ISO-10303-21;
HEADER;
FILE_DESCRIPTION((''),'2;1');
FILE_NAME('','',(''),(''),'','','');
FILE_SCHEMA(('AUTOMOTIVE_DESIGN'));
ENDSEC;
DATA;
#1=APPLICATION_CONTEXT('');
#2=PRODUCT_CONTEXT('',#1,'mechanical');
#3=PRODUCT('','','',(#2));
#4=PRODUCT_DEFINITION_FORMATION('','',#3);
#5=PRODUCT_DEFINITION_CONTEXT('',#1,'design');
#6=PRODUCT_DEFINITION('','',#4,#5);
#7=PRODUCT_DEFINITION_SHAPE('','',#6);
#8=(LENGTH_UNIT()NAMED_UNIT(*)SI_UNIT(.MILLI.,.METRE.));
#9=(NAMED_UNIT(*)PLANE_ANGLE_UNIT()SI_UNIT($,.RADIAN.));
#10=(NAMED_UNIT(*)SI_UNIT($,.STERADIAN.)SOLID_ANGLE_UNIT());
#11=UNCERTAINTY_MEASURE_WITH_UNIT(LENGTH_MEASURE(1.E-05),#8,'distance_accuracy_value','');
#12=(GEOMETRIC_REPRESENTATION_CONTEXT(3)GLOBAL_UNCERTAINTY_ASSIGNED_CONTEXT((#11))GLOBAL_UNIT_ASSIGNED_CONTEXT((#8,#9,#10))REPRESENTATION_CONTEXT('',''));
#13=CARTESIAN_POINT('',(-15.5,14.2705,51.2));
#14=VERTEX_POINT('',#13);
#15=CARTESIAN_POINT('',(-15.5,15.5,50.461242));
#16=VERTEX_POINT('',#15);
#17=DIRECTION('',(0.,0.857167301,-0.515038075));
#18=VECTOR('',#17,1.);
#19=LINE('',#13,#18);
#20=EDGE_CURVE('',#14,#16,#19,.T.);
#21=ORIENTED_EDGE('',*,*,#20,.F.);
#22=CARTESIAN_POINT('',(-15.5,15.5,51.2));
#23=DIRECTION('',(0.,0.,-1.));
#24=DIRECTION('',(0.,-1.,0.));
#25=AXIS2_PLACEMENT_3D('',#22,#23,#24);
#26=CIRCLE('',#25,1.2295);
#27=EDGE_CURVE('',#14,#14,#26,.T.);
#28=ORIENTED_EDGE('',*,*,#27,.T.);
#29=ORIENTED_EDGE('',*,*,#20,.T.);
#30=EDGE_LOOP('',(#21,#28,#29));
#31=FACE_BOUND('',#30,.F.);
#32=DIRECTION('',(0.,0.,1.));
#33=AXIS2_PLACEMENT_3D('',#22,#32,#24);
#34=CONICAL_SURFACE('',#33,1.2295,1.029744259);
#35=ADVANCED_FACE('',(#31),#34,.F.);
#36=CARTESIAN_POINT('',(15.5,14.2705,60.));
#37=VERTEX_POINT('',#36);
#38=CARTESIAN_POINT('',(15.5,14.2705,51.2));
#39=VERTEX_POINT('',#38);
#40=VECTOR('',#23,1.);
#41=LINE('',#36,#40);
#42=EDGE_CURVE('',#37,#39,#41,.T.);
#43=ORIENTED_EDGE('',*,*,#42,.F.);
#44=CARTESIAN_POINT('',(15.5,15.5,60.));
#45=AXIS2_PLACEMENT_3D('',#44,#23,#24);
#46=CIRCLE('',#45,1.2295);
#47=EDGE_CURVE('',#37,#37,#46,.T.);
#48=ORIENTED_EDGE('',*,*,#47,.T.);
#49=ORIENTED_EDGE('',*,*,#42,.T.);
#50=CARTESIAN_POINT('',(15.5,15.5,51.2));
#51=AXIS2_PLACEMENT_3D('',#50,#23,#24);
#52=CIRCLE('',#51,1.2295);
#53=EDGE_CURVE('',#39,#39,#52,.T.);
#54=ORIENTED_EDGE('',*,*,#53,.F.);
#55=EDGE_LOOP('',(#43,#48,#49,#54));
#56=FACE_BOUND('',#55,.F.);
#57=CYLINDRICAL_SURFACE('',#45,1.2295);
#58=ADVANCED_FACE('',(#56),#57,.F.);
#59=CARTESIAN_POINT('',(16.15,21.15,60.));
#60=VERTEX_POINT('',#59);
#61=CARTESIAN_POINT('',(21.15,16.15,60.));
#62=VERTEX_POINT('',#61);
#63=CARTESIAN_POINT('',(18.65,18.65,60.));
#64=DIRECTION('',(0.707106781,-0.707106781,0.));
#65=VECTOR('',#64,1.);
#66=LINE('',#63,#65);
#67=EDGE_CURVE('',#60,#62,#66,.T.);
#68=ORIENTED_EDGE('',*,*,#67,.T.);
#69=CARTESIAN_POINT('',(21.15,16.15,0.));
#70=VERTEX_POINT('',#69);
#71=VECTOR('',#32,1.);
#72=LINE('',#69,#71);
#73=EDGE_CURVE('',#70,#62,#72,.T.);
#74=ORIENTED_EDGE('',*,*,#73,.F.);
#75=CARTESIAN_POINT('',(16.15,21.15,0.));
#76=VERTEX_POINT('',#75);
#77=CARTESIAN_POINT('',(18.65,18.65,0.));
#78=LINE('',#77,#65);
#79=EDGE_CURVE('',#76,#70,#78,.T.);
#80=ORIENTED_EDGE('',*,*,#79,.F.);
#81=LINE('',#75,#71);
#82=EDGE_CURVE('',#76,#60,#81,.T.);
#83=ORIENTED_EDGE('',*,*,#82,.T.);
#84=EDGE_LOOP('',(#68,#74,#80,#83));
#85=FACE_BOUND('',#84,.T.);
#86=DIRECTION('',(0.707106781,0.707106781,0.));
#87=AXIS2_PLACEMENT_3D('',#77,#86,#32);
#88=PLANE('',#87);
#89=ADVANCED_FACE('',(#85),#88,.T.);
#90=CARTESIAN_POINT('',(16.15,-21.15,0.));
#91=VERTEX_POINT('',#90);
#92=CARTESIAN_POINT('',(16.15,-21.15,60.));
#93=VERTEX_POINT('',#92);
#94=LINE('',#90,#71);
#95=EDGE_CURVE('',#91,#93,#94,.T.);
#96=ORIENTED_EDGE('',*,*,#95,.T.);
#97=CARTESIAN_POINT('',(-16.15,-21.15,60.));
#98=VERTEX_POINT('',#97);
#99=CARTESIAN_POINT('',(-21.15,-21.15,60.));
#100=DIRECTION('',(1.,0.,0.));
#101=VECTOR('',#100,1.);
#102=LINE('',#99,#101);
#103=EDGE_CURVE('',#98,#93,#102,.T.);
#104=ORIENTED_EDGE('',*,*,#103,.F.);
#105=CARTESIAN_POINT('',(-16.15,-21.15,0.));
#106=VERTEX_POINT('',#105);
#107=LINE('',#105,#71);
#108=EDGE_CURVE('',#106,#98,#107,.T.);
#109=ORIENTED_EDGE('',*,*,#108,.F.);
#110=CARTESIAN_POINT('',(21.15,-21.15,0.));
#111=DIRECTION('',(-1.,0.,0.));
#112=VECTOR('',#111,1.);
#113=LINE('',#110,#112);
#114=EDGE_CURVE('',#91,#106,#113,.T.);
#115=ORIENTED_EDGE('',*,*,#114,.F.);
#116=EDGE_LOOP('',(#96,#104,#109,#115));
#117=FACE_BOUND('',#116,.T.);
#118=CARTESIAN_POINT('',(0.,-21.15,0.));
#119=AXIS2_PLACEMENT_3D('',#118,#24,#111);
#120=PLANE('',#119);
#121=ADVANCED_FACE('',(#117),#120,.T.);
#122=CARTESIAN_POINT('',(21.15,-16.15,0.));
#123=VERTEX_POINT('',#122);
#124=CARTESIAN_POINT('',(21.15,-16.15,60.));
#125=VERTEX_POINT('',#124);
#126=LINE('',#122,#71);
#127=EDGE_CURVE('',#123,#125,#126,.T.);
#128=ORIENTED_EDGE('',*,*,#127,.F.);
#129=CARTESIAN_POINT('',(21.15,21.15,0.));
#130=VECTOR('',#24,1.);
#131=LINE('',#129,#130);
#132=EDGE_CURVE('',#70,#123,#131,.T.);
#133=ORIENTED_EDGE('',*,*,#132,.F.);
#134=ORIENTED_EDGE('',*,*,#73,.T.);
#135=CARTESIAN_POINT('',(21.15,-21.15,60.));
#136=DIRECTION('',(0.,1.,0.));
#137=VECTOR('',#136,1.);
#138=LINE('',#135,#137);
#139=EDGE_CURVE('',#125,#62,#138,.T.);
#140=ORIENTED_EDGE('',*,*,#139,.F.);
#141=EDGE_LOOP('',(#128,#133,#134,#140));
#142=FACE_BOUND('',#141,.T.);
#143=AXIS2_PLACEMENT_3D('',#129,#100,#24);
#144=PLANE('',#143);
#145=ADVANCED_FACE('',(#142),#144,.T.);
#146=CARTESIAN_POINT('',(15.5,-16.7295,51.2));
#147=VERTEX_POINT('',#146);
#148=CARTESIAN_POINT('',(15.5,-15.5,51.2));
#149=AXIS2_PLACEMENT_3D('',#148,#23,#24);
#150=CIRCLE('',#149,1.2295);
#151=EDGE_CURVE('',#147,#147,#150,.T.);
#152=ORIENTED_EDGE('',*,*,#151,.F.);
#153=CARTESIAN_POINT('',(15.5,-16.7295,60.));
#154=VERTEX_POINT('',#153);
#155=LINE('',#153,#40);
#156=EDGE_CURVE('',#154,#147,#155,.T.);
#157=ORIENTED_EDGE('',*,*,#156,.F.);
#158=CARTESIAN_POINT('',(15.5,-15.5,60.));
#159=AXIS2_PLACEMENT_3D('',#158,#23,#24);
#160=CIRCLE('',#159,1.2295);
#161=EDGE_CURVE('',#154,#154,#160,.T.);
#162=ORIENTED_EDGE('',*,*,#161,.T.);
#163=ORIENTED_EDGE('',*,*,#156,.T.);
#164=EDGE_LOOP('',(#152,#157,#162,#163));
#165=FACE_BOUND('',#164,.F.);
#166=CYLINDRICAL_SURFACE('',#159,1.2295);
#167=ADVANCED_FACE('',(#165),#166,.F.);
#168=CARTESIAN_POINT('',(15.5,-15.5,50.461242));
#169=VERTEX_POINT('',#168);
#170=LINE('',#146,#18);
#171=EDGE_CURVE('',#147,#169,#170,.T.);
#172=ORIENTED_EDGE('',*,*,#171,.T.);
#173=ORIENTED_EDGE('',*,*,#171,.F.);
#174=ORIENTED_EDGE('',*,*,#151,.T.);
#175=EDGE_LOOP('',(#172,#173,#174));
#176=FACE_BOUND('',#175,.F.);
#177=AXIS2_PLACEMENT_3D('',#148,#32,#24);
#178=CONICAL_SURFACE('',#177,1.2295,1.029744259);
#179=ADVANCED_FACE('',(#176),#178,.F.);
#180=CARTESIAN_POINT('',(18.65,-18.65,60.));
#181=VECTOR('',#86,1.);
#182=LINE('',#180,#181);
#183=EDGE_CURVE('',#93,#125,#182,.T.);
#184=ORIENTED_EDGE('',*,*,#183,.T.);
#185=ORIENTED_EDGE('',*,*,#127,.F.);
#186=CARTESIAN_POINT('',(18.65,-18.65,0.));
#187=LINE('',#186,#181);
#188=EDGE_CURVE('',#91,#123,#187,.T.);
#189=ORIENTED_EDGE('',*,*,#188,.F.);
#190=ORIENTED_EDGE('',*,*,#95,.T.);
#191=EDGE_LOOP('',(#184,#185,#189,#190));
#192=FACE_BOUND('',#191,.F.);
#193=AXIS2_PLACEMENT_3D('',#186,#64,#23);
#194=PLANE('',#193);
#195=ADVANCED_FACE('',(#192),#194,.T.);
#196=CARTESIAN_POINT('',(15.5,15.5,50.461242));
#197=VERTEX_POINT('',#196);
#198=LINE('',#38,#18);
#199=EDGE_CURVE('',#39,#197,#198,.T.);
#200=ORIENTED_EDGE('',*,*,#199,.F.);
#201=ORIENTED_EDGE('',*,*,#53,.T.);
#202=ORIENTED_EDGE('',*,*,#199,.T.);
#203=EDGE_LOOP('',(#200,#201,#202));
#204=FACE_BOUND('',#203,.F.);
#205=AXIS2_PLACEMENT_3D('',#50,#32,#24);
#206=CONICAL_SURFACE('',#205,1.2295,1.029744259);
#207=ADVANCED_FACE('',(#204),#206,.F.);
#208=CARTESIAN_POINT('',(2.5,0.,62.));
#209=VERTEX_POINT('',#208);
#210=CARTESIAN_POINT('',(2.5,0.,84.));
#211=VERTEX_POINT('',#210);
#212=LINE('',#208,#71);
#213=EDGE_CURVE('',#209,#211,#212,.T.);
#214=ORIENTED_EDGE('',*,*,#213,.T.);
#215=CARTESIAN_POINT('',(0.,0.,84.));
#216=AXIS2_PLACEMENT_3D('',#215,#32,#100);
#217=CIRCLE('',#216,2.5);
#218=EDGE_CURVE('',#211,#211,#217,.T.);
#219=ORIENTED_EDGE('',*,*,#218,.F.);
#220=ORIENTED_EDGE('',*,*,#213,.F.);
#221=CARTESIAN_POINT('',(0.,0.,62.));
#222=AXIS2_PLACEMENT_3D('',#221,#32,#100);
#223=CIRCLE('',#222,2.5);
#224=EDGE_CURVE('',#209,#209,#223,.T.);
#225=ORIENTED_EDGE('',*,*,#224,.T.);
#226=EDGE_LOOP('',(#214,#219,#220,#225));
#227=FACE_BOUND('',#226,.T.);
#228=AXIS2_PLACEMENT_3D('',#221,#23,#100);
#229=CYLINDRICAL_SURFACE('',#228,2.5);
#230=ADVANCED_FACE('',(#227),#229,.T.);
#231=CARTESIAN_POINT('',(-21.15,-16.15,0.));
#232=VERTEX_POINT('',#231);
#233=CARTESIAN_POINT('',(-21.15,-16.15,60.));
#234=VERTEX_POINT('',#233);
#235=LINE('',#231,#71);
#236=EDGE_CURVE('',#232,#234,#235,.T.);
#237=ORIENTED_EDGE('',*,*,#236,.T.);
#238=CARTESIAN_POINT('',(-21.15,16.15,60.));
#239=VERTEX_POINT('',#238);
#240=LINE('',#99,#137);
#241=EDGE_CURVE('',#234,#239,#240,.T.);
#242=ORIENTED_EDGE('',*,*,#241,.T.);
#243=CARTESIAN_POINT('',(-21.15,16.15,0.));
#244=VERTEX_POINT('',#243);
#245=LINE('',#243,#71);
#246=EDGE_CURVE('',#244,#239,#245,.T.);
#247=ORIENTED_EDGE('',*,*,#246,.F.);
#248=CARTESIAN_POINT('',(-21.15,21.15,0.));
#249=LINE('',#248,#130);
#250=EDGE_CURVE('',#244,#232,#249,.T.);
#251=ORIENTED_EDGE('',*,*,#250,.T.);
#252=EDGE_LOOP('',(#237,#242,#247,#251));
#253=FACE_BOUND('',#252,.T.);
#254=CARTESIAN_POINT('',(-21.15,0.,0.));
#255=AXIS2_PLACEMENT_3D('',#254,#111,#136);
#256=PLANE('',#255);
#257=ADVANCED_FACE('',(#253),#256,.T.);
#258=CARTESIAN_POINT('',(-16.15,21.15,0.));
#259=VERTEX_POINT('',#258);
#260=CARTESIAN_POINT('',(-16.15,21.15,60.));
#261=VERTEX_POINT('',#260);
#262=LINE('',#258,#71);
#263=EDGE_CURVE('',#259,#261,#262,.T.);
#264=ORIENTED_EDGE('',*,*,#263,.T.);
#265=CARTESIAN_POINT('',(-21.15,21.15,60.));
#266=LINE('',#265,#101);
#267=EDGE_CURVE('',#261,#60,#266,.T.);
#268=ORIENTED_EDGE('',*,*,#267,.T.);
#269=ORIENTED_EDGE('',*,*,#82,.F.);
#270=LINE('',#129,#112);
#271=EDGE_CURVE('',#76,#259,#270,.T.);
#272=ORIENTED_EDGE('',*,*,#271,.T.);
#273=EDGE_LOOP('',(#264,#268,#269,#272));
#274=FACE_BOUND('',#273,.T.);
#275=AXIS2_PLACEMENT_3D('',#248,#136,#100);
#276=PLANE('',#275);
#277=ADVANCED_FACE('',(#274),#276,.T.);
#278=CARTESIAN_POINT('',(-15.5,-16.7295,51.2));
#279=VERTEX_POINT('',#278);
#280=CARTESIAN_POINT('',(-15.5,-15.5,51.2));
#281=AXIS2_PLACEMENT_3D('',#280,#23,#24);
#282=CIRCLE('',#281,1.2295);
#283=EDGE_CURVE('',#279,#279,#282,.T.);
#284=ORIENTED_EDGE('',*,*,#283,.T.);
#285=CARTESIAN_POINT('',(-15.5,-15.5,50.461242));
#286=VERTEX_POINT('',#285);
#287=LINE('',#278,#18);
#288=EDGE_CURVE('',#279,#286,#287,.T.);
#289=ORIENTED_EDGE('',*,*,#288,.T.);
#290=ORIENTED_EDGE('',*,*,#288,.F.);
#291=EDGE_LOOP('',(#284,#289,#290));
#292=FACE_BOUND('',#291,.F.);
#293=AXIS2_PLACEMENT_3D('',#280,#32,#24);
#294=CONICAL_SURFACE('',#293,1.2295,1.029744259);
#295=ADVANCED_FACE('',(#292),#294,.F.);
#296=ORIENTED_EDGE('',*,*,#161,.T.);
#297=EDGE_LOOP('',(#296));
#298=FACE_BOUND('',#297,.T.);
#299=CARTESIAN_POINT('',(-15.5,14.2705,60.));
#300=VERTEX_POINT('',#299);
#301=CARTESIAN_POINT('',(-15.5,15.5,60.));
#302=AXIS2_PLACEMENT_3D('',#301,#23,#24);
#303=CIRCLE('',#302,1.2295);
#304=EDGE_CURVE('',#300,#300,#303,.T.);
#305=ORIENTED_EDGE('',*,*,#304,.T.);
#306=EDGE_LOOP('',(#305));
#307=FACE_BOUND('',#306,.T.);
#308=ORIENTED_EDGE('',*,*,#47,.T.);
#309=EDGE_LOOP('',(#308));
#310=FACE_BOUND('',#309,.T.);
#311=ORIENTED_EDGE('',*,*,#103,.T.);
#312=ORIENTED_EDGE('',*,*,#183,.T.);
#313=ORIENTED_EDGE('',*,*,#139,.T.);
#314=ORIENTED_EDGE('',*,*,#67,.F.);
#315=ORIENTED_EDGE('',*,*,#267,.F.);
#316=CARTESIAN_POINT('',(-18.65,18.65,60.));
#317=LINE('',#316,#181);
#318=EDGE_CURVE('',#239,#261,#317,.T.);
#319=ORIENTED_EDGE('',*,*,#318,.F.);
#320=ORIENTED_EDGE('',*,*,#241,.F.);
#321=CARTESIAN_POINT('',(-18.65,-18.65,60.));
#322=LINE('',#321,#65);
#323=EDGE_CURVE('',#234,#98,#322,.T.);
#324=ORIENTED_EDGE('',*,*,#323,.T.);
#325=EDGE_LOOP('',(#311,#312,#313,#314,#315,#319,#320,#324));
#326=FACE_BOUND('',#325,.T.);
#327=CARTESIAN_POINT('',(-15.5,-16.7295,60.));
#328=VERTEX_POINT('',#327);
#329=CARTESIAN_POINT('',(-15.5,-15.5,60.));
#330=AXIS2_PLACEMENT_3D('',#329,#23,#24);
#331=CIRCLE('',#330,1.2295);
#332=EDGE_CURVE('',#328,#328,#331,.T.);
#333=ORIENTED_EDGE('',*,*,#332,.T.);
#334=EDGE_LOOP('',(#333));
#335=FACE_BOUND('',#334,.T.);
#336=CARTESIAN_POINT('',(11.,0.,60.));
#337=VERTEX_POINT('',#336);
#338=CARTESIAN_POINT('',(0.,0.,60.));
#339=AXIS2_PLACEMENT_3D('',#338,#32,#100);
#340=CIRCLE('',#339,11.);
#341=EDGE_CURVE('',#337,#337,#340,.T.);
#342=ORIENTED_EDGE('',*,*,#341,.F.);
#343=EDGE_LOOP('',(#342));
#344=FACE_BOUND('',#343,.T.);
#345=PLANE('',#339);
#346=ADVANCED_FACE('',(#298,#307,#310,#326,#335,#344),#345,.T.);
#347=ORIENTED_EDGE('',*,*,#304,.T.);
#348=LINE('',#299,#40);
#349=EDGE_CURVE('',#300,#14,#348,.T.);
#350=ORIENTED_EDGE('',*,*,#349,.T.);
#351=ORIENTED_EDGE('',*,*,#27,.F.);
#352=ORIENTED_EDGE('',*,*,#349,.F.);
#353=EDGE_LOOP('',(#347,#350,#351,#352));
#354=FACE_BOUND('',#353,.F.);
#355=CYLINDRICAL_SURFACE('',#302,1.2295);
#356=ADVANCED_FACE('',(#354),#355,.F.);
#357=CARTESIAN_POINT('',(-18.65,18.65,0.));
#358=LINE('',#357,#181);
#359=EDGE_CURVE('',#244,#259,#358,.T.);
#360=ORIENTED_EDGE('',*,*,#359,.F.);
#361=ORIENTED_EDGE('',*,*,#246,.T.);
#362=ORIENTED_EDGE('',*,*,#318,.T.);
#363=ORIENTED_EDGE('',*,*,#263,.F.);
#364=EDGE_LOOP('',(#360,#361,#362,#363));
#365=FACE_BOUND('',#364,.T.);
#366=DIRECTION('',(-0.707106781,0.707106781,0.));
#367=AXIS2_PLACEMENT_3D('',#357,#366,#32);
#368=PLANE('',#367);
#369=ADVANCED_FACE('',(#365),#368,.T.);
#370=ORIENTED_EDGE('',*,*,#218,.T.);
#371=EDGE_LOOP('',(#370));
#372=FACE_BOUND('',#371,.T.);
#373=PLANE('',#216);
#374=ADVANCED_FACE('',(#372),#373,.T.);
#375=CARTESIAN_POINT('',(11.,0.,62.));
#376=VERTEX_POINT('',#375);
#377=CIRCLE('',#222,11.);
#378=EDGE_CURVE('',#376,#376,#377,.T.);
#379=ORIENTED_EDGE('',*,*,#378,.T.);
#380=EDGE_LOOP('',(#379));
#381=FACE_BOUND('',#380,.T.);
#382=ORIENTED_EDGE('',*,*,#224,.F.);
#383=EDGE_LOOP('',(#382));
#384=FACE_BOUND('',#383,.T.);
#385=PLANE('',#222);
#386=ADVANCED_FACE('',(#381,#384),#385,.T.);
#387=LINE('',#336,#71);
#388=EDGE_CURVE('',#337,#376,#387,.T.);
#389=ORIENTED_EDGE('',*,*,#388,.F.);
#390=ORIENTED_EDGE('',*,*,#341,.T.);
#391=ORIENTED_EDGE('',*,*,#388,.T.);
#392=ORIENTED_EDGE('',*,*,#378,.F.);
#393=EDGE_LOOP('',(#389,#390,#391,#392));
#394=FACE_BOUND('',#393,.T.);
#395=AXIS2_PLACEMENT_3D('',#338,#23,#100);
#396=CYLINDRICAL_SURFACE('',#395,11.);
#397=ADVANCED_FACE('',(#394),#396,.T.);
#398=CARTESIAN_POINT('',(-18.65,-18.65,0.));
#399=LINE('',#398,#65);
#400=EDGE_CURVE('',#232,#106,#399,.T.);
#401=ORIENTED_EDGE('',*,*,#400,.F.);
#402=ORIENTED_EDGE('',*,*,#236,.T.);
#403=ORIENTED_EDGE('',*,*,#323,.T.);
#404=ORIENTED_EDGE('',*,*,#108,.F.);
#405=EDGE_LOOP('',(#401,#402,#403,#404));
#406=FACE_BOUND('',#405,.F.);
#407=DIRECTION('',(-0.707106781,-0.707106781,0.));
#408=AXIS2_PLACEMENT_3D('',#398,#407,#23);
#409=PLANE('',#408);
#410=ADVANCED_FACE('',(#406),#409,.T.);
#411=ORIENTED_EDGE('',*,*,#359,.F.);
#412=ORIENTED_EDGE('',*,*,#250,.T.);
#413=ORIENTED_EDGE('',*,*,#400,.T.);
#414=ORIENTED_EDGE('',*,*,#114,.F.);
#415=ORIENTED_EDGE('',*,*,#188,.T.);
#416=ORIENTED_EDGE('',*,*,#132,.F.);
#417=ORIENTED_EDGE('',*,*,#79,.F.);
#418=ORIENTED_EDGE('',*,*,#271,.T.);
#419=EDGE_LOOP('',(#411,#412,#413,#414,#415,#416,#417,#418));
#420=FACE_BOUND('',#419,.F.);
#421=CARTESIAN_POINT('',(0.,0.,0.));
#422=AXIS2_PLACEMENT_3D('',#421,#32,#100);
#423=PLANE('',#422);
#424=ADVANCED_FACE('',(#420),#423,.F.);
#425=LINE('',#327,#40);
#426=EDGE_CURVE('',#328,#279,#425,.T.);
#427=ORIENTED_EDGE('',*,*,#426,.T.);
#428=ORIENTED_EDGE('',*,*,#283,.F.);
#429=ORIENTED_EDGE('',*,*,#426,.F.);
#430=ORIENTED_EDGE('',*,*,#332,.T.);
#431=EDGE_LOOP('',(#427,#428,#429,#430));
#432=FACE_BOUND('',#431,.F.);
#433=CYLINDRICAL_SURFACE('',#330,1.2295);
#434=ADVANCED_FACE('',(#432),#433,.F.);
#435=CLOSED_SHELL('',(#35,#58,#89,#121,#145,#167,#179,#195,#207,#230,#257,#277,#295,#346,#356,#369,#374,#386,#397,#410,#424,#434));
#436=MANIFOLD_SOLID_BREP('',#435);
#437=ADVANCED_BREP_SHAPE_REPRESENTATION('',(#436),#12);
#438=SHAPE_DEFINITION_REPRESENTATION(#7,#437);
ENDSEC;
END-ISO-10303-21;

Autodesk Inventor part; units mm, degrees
ref_plane "YZ Plane" through (0, 0, 0) normal (1, 0, 0) x (0, 1, 0)
ref_plane "XZ Plane" through (0, 0, 0) normal (0, 1, 0) x (-1, 0, 0)
ref_plane "XY Plane" through (0, 0, 0) normal (0, 0, 1) x (1, 0, 0)
sketch "Skizze1" plane through (0, 0, 0) normal (0, 0, 1) x (1, 0, 0)
  line L0 (-29.61, 0) -> (29.61, 0) projected
  line L1 (0, -29.61) -> (0, 29.61) projected
  line L2 (21.15, -21.15) -> (-21.15, -21.15)
  line L3 (-21.15, -21.15) -> (-21.15, 21.15)
  line L4 (-21.15, 21.15) -> (21.15, 21.15)
  line L5 (21.15, 21.15) -> (21.15, -21.15)
  line L6 (21.15, -21.15) -> (-21.15, 21.15) construction
  line L7 (-21.15, -21.15) -> (21.15, 21.15) construction
  point P0 (0, 0)
  dimension "d0" = 42.3
  dimension "d1" = 42.3
extrude "Extrusion1" add sketch "Skizze1" along normal blind 60
sketch "Skizze2" plane through (0, 0, 60) normal (0, 0, 1) x (1, 0, 0)
  circle A0 centre (0, 0) radius 11
  dimension "d4" = 22
extrude "Extrusion2" add sketch "Skizze2" along normal blind 2
sketch "Skizze3" plane through (0, 0, 62) normal (0, 0, 1) x (1, 0, 0)
  circle A0 centre (0, 0) radius 2.5
  dimension "d7" = 5
extrude "Extrusion3" add sketch "Skizze3" along normal blind 22
sketch "Skizze4" plane through (0, 0, 60) normal (0, 0, 1) x (1, 0, 0)
  circle A0 centre (0, 0) radius 11 projected
  line L0 (21.15, 21.15) -> (-21.15, 21.15) projected
  line L1 (-21.15, 21.15) -> (-21.15, -21.15) projected
  line L2 (-21.15, -21.15) -> (21.15, -21.15) projected
  line L3 (21.15, -21.15) -> (21.15, 21.15) projected
  line L4 (15.5, -15.5) -> (-15.5, -15.5)
  line L5 (-15.5, -15.5) -> (-15.5, 15.5)
  line L6 (-15.5, 15.5) -> (15.5, 15.5)
  line L7 (15.5, 15.5) -> (15.5, -15.5)
  line L8 (15.5, -15.5) -> (-15.5, 15.5) construction
  line L9 (-15.5, -15.5) -> (15.5, 15.5) construction
  dimension "d10" = 31
  dimension "d11" = 31
hole "Bohrung1" at (-15.5, 15.5, 60) at (15.5, 15.5, 60) at (15.5, -15.5, 60) at (-15.5, -15.5, 60) direction (0, 0, -1) diameter 2.459 depth 8.8 tip angle 118 thread size "M3x0.5" class "6H" standard "ISO Metric profile"
chamfer "Fasen1" distance 5 angle 45 4 edges at (21.15, -21.15, 30) (21.15, 21.15, 30) (-21.15, 21.15, 30) (-21.15, -21.15, 30)
equation "\"d1\" = d0"
equation "\"d11\" = d10"
properties part number "Motor ST4118D1804-A"
